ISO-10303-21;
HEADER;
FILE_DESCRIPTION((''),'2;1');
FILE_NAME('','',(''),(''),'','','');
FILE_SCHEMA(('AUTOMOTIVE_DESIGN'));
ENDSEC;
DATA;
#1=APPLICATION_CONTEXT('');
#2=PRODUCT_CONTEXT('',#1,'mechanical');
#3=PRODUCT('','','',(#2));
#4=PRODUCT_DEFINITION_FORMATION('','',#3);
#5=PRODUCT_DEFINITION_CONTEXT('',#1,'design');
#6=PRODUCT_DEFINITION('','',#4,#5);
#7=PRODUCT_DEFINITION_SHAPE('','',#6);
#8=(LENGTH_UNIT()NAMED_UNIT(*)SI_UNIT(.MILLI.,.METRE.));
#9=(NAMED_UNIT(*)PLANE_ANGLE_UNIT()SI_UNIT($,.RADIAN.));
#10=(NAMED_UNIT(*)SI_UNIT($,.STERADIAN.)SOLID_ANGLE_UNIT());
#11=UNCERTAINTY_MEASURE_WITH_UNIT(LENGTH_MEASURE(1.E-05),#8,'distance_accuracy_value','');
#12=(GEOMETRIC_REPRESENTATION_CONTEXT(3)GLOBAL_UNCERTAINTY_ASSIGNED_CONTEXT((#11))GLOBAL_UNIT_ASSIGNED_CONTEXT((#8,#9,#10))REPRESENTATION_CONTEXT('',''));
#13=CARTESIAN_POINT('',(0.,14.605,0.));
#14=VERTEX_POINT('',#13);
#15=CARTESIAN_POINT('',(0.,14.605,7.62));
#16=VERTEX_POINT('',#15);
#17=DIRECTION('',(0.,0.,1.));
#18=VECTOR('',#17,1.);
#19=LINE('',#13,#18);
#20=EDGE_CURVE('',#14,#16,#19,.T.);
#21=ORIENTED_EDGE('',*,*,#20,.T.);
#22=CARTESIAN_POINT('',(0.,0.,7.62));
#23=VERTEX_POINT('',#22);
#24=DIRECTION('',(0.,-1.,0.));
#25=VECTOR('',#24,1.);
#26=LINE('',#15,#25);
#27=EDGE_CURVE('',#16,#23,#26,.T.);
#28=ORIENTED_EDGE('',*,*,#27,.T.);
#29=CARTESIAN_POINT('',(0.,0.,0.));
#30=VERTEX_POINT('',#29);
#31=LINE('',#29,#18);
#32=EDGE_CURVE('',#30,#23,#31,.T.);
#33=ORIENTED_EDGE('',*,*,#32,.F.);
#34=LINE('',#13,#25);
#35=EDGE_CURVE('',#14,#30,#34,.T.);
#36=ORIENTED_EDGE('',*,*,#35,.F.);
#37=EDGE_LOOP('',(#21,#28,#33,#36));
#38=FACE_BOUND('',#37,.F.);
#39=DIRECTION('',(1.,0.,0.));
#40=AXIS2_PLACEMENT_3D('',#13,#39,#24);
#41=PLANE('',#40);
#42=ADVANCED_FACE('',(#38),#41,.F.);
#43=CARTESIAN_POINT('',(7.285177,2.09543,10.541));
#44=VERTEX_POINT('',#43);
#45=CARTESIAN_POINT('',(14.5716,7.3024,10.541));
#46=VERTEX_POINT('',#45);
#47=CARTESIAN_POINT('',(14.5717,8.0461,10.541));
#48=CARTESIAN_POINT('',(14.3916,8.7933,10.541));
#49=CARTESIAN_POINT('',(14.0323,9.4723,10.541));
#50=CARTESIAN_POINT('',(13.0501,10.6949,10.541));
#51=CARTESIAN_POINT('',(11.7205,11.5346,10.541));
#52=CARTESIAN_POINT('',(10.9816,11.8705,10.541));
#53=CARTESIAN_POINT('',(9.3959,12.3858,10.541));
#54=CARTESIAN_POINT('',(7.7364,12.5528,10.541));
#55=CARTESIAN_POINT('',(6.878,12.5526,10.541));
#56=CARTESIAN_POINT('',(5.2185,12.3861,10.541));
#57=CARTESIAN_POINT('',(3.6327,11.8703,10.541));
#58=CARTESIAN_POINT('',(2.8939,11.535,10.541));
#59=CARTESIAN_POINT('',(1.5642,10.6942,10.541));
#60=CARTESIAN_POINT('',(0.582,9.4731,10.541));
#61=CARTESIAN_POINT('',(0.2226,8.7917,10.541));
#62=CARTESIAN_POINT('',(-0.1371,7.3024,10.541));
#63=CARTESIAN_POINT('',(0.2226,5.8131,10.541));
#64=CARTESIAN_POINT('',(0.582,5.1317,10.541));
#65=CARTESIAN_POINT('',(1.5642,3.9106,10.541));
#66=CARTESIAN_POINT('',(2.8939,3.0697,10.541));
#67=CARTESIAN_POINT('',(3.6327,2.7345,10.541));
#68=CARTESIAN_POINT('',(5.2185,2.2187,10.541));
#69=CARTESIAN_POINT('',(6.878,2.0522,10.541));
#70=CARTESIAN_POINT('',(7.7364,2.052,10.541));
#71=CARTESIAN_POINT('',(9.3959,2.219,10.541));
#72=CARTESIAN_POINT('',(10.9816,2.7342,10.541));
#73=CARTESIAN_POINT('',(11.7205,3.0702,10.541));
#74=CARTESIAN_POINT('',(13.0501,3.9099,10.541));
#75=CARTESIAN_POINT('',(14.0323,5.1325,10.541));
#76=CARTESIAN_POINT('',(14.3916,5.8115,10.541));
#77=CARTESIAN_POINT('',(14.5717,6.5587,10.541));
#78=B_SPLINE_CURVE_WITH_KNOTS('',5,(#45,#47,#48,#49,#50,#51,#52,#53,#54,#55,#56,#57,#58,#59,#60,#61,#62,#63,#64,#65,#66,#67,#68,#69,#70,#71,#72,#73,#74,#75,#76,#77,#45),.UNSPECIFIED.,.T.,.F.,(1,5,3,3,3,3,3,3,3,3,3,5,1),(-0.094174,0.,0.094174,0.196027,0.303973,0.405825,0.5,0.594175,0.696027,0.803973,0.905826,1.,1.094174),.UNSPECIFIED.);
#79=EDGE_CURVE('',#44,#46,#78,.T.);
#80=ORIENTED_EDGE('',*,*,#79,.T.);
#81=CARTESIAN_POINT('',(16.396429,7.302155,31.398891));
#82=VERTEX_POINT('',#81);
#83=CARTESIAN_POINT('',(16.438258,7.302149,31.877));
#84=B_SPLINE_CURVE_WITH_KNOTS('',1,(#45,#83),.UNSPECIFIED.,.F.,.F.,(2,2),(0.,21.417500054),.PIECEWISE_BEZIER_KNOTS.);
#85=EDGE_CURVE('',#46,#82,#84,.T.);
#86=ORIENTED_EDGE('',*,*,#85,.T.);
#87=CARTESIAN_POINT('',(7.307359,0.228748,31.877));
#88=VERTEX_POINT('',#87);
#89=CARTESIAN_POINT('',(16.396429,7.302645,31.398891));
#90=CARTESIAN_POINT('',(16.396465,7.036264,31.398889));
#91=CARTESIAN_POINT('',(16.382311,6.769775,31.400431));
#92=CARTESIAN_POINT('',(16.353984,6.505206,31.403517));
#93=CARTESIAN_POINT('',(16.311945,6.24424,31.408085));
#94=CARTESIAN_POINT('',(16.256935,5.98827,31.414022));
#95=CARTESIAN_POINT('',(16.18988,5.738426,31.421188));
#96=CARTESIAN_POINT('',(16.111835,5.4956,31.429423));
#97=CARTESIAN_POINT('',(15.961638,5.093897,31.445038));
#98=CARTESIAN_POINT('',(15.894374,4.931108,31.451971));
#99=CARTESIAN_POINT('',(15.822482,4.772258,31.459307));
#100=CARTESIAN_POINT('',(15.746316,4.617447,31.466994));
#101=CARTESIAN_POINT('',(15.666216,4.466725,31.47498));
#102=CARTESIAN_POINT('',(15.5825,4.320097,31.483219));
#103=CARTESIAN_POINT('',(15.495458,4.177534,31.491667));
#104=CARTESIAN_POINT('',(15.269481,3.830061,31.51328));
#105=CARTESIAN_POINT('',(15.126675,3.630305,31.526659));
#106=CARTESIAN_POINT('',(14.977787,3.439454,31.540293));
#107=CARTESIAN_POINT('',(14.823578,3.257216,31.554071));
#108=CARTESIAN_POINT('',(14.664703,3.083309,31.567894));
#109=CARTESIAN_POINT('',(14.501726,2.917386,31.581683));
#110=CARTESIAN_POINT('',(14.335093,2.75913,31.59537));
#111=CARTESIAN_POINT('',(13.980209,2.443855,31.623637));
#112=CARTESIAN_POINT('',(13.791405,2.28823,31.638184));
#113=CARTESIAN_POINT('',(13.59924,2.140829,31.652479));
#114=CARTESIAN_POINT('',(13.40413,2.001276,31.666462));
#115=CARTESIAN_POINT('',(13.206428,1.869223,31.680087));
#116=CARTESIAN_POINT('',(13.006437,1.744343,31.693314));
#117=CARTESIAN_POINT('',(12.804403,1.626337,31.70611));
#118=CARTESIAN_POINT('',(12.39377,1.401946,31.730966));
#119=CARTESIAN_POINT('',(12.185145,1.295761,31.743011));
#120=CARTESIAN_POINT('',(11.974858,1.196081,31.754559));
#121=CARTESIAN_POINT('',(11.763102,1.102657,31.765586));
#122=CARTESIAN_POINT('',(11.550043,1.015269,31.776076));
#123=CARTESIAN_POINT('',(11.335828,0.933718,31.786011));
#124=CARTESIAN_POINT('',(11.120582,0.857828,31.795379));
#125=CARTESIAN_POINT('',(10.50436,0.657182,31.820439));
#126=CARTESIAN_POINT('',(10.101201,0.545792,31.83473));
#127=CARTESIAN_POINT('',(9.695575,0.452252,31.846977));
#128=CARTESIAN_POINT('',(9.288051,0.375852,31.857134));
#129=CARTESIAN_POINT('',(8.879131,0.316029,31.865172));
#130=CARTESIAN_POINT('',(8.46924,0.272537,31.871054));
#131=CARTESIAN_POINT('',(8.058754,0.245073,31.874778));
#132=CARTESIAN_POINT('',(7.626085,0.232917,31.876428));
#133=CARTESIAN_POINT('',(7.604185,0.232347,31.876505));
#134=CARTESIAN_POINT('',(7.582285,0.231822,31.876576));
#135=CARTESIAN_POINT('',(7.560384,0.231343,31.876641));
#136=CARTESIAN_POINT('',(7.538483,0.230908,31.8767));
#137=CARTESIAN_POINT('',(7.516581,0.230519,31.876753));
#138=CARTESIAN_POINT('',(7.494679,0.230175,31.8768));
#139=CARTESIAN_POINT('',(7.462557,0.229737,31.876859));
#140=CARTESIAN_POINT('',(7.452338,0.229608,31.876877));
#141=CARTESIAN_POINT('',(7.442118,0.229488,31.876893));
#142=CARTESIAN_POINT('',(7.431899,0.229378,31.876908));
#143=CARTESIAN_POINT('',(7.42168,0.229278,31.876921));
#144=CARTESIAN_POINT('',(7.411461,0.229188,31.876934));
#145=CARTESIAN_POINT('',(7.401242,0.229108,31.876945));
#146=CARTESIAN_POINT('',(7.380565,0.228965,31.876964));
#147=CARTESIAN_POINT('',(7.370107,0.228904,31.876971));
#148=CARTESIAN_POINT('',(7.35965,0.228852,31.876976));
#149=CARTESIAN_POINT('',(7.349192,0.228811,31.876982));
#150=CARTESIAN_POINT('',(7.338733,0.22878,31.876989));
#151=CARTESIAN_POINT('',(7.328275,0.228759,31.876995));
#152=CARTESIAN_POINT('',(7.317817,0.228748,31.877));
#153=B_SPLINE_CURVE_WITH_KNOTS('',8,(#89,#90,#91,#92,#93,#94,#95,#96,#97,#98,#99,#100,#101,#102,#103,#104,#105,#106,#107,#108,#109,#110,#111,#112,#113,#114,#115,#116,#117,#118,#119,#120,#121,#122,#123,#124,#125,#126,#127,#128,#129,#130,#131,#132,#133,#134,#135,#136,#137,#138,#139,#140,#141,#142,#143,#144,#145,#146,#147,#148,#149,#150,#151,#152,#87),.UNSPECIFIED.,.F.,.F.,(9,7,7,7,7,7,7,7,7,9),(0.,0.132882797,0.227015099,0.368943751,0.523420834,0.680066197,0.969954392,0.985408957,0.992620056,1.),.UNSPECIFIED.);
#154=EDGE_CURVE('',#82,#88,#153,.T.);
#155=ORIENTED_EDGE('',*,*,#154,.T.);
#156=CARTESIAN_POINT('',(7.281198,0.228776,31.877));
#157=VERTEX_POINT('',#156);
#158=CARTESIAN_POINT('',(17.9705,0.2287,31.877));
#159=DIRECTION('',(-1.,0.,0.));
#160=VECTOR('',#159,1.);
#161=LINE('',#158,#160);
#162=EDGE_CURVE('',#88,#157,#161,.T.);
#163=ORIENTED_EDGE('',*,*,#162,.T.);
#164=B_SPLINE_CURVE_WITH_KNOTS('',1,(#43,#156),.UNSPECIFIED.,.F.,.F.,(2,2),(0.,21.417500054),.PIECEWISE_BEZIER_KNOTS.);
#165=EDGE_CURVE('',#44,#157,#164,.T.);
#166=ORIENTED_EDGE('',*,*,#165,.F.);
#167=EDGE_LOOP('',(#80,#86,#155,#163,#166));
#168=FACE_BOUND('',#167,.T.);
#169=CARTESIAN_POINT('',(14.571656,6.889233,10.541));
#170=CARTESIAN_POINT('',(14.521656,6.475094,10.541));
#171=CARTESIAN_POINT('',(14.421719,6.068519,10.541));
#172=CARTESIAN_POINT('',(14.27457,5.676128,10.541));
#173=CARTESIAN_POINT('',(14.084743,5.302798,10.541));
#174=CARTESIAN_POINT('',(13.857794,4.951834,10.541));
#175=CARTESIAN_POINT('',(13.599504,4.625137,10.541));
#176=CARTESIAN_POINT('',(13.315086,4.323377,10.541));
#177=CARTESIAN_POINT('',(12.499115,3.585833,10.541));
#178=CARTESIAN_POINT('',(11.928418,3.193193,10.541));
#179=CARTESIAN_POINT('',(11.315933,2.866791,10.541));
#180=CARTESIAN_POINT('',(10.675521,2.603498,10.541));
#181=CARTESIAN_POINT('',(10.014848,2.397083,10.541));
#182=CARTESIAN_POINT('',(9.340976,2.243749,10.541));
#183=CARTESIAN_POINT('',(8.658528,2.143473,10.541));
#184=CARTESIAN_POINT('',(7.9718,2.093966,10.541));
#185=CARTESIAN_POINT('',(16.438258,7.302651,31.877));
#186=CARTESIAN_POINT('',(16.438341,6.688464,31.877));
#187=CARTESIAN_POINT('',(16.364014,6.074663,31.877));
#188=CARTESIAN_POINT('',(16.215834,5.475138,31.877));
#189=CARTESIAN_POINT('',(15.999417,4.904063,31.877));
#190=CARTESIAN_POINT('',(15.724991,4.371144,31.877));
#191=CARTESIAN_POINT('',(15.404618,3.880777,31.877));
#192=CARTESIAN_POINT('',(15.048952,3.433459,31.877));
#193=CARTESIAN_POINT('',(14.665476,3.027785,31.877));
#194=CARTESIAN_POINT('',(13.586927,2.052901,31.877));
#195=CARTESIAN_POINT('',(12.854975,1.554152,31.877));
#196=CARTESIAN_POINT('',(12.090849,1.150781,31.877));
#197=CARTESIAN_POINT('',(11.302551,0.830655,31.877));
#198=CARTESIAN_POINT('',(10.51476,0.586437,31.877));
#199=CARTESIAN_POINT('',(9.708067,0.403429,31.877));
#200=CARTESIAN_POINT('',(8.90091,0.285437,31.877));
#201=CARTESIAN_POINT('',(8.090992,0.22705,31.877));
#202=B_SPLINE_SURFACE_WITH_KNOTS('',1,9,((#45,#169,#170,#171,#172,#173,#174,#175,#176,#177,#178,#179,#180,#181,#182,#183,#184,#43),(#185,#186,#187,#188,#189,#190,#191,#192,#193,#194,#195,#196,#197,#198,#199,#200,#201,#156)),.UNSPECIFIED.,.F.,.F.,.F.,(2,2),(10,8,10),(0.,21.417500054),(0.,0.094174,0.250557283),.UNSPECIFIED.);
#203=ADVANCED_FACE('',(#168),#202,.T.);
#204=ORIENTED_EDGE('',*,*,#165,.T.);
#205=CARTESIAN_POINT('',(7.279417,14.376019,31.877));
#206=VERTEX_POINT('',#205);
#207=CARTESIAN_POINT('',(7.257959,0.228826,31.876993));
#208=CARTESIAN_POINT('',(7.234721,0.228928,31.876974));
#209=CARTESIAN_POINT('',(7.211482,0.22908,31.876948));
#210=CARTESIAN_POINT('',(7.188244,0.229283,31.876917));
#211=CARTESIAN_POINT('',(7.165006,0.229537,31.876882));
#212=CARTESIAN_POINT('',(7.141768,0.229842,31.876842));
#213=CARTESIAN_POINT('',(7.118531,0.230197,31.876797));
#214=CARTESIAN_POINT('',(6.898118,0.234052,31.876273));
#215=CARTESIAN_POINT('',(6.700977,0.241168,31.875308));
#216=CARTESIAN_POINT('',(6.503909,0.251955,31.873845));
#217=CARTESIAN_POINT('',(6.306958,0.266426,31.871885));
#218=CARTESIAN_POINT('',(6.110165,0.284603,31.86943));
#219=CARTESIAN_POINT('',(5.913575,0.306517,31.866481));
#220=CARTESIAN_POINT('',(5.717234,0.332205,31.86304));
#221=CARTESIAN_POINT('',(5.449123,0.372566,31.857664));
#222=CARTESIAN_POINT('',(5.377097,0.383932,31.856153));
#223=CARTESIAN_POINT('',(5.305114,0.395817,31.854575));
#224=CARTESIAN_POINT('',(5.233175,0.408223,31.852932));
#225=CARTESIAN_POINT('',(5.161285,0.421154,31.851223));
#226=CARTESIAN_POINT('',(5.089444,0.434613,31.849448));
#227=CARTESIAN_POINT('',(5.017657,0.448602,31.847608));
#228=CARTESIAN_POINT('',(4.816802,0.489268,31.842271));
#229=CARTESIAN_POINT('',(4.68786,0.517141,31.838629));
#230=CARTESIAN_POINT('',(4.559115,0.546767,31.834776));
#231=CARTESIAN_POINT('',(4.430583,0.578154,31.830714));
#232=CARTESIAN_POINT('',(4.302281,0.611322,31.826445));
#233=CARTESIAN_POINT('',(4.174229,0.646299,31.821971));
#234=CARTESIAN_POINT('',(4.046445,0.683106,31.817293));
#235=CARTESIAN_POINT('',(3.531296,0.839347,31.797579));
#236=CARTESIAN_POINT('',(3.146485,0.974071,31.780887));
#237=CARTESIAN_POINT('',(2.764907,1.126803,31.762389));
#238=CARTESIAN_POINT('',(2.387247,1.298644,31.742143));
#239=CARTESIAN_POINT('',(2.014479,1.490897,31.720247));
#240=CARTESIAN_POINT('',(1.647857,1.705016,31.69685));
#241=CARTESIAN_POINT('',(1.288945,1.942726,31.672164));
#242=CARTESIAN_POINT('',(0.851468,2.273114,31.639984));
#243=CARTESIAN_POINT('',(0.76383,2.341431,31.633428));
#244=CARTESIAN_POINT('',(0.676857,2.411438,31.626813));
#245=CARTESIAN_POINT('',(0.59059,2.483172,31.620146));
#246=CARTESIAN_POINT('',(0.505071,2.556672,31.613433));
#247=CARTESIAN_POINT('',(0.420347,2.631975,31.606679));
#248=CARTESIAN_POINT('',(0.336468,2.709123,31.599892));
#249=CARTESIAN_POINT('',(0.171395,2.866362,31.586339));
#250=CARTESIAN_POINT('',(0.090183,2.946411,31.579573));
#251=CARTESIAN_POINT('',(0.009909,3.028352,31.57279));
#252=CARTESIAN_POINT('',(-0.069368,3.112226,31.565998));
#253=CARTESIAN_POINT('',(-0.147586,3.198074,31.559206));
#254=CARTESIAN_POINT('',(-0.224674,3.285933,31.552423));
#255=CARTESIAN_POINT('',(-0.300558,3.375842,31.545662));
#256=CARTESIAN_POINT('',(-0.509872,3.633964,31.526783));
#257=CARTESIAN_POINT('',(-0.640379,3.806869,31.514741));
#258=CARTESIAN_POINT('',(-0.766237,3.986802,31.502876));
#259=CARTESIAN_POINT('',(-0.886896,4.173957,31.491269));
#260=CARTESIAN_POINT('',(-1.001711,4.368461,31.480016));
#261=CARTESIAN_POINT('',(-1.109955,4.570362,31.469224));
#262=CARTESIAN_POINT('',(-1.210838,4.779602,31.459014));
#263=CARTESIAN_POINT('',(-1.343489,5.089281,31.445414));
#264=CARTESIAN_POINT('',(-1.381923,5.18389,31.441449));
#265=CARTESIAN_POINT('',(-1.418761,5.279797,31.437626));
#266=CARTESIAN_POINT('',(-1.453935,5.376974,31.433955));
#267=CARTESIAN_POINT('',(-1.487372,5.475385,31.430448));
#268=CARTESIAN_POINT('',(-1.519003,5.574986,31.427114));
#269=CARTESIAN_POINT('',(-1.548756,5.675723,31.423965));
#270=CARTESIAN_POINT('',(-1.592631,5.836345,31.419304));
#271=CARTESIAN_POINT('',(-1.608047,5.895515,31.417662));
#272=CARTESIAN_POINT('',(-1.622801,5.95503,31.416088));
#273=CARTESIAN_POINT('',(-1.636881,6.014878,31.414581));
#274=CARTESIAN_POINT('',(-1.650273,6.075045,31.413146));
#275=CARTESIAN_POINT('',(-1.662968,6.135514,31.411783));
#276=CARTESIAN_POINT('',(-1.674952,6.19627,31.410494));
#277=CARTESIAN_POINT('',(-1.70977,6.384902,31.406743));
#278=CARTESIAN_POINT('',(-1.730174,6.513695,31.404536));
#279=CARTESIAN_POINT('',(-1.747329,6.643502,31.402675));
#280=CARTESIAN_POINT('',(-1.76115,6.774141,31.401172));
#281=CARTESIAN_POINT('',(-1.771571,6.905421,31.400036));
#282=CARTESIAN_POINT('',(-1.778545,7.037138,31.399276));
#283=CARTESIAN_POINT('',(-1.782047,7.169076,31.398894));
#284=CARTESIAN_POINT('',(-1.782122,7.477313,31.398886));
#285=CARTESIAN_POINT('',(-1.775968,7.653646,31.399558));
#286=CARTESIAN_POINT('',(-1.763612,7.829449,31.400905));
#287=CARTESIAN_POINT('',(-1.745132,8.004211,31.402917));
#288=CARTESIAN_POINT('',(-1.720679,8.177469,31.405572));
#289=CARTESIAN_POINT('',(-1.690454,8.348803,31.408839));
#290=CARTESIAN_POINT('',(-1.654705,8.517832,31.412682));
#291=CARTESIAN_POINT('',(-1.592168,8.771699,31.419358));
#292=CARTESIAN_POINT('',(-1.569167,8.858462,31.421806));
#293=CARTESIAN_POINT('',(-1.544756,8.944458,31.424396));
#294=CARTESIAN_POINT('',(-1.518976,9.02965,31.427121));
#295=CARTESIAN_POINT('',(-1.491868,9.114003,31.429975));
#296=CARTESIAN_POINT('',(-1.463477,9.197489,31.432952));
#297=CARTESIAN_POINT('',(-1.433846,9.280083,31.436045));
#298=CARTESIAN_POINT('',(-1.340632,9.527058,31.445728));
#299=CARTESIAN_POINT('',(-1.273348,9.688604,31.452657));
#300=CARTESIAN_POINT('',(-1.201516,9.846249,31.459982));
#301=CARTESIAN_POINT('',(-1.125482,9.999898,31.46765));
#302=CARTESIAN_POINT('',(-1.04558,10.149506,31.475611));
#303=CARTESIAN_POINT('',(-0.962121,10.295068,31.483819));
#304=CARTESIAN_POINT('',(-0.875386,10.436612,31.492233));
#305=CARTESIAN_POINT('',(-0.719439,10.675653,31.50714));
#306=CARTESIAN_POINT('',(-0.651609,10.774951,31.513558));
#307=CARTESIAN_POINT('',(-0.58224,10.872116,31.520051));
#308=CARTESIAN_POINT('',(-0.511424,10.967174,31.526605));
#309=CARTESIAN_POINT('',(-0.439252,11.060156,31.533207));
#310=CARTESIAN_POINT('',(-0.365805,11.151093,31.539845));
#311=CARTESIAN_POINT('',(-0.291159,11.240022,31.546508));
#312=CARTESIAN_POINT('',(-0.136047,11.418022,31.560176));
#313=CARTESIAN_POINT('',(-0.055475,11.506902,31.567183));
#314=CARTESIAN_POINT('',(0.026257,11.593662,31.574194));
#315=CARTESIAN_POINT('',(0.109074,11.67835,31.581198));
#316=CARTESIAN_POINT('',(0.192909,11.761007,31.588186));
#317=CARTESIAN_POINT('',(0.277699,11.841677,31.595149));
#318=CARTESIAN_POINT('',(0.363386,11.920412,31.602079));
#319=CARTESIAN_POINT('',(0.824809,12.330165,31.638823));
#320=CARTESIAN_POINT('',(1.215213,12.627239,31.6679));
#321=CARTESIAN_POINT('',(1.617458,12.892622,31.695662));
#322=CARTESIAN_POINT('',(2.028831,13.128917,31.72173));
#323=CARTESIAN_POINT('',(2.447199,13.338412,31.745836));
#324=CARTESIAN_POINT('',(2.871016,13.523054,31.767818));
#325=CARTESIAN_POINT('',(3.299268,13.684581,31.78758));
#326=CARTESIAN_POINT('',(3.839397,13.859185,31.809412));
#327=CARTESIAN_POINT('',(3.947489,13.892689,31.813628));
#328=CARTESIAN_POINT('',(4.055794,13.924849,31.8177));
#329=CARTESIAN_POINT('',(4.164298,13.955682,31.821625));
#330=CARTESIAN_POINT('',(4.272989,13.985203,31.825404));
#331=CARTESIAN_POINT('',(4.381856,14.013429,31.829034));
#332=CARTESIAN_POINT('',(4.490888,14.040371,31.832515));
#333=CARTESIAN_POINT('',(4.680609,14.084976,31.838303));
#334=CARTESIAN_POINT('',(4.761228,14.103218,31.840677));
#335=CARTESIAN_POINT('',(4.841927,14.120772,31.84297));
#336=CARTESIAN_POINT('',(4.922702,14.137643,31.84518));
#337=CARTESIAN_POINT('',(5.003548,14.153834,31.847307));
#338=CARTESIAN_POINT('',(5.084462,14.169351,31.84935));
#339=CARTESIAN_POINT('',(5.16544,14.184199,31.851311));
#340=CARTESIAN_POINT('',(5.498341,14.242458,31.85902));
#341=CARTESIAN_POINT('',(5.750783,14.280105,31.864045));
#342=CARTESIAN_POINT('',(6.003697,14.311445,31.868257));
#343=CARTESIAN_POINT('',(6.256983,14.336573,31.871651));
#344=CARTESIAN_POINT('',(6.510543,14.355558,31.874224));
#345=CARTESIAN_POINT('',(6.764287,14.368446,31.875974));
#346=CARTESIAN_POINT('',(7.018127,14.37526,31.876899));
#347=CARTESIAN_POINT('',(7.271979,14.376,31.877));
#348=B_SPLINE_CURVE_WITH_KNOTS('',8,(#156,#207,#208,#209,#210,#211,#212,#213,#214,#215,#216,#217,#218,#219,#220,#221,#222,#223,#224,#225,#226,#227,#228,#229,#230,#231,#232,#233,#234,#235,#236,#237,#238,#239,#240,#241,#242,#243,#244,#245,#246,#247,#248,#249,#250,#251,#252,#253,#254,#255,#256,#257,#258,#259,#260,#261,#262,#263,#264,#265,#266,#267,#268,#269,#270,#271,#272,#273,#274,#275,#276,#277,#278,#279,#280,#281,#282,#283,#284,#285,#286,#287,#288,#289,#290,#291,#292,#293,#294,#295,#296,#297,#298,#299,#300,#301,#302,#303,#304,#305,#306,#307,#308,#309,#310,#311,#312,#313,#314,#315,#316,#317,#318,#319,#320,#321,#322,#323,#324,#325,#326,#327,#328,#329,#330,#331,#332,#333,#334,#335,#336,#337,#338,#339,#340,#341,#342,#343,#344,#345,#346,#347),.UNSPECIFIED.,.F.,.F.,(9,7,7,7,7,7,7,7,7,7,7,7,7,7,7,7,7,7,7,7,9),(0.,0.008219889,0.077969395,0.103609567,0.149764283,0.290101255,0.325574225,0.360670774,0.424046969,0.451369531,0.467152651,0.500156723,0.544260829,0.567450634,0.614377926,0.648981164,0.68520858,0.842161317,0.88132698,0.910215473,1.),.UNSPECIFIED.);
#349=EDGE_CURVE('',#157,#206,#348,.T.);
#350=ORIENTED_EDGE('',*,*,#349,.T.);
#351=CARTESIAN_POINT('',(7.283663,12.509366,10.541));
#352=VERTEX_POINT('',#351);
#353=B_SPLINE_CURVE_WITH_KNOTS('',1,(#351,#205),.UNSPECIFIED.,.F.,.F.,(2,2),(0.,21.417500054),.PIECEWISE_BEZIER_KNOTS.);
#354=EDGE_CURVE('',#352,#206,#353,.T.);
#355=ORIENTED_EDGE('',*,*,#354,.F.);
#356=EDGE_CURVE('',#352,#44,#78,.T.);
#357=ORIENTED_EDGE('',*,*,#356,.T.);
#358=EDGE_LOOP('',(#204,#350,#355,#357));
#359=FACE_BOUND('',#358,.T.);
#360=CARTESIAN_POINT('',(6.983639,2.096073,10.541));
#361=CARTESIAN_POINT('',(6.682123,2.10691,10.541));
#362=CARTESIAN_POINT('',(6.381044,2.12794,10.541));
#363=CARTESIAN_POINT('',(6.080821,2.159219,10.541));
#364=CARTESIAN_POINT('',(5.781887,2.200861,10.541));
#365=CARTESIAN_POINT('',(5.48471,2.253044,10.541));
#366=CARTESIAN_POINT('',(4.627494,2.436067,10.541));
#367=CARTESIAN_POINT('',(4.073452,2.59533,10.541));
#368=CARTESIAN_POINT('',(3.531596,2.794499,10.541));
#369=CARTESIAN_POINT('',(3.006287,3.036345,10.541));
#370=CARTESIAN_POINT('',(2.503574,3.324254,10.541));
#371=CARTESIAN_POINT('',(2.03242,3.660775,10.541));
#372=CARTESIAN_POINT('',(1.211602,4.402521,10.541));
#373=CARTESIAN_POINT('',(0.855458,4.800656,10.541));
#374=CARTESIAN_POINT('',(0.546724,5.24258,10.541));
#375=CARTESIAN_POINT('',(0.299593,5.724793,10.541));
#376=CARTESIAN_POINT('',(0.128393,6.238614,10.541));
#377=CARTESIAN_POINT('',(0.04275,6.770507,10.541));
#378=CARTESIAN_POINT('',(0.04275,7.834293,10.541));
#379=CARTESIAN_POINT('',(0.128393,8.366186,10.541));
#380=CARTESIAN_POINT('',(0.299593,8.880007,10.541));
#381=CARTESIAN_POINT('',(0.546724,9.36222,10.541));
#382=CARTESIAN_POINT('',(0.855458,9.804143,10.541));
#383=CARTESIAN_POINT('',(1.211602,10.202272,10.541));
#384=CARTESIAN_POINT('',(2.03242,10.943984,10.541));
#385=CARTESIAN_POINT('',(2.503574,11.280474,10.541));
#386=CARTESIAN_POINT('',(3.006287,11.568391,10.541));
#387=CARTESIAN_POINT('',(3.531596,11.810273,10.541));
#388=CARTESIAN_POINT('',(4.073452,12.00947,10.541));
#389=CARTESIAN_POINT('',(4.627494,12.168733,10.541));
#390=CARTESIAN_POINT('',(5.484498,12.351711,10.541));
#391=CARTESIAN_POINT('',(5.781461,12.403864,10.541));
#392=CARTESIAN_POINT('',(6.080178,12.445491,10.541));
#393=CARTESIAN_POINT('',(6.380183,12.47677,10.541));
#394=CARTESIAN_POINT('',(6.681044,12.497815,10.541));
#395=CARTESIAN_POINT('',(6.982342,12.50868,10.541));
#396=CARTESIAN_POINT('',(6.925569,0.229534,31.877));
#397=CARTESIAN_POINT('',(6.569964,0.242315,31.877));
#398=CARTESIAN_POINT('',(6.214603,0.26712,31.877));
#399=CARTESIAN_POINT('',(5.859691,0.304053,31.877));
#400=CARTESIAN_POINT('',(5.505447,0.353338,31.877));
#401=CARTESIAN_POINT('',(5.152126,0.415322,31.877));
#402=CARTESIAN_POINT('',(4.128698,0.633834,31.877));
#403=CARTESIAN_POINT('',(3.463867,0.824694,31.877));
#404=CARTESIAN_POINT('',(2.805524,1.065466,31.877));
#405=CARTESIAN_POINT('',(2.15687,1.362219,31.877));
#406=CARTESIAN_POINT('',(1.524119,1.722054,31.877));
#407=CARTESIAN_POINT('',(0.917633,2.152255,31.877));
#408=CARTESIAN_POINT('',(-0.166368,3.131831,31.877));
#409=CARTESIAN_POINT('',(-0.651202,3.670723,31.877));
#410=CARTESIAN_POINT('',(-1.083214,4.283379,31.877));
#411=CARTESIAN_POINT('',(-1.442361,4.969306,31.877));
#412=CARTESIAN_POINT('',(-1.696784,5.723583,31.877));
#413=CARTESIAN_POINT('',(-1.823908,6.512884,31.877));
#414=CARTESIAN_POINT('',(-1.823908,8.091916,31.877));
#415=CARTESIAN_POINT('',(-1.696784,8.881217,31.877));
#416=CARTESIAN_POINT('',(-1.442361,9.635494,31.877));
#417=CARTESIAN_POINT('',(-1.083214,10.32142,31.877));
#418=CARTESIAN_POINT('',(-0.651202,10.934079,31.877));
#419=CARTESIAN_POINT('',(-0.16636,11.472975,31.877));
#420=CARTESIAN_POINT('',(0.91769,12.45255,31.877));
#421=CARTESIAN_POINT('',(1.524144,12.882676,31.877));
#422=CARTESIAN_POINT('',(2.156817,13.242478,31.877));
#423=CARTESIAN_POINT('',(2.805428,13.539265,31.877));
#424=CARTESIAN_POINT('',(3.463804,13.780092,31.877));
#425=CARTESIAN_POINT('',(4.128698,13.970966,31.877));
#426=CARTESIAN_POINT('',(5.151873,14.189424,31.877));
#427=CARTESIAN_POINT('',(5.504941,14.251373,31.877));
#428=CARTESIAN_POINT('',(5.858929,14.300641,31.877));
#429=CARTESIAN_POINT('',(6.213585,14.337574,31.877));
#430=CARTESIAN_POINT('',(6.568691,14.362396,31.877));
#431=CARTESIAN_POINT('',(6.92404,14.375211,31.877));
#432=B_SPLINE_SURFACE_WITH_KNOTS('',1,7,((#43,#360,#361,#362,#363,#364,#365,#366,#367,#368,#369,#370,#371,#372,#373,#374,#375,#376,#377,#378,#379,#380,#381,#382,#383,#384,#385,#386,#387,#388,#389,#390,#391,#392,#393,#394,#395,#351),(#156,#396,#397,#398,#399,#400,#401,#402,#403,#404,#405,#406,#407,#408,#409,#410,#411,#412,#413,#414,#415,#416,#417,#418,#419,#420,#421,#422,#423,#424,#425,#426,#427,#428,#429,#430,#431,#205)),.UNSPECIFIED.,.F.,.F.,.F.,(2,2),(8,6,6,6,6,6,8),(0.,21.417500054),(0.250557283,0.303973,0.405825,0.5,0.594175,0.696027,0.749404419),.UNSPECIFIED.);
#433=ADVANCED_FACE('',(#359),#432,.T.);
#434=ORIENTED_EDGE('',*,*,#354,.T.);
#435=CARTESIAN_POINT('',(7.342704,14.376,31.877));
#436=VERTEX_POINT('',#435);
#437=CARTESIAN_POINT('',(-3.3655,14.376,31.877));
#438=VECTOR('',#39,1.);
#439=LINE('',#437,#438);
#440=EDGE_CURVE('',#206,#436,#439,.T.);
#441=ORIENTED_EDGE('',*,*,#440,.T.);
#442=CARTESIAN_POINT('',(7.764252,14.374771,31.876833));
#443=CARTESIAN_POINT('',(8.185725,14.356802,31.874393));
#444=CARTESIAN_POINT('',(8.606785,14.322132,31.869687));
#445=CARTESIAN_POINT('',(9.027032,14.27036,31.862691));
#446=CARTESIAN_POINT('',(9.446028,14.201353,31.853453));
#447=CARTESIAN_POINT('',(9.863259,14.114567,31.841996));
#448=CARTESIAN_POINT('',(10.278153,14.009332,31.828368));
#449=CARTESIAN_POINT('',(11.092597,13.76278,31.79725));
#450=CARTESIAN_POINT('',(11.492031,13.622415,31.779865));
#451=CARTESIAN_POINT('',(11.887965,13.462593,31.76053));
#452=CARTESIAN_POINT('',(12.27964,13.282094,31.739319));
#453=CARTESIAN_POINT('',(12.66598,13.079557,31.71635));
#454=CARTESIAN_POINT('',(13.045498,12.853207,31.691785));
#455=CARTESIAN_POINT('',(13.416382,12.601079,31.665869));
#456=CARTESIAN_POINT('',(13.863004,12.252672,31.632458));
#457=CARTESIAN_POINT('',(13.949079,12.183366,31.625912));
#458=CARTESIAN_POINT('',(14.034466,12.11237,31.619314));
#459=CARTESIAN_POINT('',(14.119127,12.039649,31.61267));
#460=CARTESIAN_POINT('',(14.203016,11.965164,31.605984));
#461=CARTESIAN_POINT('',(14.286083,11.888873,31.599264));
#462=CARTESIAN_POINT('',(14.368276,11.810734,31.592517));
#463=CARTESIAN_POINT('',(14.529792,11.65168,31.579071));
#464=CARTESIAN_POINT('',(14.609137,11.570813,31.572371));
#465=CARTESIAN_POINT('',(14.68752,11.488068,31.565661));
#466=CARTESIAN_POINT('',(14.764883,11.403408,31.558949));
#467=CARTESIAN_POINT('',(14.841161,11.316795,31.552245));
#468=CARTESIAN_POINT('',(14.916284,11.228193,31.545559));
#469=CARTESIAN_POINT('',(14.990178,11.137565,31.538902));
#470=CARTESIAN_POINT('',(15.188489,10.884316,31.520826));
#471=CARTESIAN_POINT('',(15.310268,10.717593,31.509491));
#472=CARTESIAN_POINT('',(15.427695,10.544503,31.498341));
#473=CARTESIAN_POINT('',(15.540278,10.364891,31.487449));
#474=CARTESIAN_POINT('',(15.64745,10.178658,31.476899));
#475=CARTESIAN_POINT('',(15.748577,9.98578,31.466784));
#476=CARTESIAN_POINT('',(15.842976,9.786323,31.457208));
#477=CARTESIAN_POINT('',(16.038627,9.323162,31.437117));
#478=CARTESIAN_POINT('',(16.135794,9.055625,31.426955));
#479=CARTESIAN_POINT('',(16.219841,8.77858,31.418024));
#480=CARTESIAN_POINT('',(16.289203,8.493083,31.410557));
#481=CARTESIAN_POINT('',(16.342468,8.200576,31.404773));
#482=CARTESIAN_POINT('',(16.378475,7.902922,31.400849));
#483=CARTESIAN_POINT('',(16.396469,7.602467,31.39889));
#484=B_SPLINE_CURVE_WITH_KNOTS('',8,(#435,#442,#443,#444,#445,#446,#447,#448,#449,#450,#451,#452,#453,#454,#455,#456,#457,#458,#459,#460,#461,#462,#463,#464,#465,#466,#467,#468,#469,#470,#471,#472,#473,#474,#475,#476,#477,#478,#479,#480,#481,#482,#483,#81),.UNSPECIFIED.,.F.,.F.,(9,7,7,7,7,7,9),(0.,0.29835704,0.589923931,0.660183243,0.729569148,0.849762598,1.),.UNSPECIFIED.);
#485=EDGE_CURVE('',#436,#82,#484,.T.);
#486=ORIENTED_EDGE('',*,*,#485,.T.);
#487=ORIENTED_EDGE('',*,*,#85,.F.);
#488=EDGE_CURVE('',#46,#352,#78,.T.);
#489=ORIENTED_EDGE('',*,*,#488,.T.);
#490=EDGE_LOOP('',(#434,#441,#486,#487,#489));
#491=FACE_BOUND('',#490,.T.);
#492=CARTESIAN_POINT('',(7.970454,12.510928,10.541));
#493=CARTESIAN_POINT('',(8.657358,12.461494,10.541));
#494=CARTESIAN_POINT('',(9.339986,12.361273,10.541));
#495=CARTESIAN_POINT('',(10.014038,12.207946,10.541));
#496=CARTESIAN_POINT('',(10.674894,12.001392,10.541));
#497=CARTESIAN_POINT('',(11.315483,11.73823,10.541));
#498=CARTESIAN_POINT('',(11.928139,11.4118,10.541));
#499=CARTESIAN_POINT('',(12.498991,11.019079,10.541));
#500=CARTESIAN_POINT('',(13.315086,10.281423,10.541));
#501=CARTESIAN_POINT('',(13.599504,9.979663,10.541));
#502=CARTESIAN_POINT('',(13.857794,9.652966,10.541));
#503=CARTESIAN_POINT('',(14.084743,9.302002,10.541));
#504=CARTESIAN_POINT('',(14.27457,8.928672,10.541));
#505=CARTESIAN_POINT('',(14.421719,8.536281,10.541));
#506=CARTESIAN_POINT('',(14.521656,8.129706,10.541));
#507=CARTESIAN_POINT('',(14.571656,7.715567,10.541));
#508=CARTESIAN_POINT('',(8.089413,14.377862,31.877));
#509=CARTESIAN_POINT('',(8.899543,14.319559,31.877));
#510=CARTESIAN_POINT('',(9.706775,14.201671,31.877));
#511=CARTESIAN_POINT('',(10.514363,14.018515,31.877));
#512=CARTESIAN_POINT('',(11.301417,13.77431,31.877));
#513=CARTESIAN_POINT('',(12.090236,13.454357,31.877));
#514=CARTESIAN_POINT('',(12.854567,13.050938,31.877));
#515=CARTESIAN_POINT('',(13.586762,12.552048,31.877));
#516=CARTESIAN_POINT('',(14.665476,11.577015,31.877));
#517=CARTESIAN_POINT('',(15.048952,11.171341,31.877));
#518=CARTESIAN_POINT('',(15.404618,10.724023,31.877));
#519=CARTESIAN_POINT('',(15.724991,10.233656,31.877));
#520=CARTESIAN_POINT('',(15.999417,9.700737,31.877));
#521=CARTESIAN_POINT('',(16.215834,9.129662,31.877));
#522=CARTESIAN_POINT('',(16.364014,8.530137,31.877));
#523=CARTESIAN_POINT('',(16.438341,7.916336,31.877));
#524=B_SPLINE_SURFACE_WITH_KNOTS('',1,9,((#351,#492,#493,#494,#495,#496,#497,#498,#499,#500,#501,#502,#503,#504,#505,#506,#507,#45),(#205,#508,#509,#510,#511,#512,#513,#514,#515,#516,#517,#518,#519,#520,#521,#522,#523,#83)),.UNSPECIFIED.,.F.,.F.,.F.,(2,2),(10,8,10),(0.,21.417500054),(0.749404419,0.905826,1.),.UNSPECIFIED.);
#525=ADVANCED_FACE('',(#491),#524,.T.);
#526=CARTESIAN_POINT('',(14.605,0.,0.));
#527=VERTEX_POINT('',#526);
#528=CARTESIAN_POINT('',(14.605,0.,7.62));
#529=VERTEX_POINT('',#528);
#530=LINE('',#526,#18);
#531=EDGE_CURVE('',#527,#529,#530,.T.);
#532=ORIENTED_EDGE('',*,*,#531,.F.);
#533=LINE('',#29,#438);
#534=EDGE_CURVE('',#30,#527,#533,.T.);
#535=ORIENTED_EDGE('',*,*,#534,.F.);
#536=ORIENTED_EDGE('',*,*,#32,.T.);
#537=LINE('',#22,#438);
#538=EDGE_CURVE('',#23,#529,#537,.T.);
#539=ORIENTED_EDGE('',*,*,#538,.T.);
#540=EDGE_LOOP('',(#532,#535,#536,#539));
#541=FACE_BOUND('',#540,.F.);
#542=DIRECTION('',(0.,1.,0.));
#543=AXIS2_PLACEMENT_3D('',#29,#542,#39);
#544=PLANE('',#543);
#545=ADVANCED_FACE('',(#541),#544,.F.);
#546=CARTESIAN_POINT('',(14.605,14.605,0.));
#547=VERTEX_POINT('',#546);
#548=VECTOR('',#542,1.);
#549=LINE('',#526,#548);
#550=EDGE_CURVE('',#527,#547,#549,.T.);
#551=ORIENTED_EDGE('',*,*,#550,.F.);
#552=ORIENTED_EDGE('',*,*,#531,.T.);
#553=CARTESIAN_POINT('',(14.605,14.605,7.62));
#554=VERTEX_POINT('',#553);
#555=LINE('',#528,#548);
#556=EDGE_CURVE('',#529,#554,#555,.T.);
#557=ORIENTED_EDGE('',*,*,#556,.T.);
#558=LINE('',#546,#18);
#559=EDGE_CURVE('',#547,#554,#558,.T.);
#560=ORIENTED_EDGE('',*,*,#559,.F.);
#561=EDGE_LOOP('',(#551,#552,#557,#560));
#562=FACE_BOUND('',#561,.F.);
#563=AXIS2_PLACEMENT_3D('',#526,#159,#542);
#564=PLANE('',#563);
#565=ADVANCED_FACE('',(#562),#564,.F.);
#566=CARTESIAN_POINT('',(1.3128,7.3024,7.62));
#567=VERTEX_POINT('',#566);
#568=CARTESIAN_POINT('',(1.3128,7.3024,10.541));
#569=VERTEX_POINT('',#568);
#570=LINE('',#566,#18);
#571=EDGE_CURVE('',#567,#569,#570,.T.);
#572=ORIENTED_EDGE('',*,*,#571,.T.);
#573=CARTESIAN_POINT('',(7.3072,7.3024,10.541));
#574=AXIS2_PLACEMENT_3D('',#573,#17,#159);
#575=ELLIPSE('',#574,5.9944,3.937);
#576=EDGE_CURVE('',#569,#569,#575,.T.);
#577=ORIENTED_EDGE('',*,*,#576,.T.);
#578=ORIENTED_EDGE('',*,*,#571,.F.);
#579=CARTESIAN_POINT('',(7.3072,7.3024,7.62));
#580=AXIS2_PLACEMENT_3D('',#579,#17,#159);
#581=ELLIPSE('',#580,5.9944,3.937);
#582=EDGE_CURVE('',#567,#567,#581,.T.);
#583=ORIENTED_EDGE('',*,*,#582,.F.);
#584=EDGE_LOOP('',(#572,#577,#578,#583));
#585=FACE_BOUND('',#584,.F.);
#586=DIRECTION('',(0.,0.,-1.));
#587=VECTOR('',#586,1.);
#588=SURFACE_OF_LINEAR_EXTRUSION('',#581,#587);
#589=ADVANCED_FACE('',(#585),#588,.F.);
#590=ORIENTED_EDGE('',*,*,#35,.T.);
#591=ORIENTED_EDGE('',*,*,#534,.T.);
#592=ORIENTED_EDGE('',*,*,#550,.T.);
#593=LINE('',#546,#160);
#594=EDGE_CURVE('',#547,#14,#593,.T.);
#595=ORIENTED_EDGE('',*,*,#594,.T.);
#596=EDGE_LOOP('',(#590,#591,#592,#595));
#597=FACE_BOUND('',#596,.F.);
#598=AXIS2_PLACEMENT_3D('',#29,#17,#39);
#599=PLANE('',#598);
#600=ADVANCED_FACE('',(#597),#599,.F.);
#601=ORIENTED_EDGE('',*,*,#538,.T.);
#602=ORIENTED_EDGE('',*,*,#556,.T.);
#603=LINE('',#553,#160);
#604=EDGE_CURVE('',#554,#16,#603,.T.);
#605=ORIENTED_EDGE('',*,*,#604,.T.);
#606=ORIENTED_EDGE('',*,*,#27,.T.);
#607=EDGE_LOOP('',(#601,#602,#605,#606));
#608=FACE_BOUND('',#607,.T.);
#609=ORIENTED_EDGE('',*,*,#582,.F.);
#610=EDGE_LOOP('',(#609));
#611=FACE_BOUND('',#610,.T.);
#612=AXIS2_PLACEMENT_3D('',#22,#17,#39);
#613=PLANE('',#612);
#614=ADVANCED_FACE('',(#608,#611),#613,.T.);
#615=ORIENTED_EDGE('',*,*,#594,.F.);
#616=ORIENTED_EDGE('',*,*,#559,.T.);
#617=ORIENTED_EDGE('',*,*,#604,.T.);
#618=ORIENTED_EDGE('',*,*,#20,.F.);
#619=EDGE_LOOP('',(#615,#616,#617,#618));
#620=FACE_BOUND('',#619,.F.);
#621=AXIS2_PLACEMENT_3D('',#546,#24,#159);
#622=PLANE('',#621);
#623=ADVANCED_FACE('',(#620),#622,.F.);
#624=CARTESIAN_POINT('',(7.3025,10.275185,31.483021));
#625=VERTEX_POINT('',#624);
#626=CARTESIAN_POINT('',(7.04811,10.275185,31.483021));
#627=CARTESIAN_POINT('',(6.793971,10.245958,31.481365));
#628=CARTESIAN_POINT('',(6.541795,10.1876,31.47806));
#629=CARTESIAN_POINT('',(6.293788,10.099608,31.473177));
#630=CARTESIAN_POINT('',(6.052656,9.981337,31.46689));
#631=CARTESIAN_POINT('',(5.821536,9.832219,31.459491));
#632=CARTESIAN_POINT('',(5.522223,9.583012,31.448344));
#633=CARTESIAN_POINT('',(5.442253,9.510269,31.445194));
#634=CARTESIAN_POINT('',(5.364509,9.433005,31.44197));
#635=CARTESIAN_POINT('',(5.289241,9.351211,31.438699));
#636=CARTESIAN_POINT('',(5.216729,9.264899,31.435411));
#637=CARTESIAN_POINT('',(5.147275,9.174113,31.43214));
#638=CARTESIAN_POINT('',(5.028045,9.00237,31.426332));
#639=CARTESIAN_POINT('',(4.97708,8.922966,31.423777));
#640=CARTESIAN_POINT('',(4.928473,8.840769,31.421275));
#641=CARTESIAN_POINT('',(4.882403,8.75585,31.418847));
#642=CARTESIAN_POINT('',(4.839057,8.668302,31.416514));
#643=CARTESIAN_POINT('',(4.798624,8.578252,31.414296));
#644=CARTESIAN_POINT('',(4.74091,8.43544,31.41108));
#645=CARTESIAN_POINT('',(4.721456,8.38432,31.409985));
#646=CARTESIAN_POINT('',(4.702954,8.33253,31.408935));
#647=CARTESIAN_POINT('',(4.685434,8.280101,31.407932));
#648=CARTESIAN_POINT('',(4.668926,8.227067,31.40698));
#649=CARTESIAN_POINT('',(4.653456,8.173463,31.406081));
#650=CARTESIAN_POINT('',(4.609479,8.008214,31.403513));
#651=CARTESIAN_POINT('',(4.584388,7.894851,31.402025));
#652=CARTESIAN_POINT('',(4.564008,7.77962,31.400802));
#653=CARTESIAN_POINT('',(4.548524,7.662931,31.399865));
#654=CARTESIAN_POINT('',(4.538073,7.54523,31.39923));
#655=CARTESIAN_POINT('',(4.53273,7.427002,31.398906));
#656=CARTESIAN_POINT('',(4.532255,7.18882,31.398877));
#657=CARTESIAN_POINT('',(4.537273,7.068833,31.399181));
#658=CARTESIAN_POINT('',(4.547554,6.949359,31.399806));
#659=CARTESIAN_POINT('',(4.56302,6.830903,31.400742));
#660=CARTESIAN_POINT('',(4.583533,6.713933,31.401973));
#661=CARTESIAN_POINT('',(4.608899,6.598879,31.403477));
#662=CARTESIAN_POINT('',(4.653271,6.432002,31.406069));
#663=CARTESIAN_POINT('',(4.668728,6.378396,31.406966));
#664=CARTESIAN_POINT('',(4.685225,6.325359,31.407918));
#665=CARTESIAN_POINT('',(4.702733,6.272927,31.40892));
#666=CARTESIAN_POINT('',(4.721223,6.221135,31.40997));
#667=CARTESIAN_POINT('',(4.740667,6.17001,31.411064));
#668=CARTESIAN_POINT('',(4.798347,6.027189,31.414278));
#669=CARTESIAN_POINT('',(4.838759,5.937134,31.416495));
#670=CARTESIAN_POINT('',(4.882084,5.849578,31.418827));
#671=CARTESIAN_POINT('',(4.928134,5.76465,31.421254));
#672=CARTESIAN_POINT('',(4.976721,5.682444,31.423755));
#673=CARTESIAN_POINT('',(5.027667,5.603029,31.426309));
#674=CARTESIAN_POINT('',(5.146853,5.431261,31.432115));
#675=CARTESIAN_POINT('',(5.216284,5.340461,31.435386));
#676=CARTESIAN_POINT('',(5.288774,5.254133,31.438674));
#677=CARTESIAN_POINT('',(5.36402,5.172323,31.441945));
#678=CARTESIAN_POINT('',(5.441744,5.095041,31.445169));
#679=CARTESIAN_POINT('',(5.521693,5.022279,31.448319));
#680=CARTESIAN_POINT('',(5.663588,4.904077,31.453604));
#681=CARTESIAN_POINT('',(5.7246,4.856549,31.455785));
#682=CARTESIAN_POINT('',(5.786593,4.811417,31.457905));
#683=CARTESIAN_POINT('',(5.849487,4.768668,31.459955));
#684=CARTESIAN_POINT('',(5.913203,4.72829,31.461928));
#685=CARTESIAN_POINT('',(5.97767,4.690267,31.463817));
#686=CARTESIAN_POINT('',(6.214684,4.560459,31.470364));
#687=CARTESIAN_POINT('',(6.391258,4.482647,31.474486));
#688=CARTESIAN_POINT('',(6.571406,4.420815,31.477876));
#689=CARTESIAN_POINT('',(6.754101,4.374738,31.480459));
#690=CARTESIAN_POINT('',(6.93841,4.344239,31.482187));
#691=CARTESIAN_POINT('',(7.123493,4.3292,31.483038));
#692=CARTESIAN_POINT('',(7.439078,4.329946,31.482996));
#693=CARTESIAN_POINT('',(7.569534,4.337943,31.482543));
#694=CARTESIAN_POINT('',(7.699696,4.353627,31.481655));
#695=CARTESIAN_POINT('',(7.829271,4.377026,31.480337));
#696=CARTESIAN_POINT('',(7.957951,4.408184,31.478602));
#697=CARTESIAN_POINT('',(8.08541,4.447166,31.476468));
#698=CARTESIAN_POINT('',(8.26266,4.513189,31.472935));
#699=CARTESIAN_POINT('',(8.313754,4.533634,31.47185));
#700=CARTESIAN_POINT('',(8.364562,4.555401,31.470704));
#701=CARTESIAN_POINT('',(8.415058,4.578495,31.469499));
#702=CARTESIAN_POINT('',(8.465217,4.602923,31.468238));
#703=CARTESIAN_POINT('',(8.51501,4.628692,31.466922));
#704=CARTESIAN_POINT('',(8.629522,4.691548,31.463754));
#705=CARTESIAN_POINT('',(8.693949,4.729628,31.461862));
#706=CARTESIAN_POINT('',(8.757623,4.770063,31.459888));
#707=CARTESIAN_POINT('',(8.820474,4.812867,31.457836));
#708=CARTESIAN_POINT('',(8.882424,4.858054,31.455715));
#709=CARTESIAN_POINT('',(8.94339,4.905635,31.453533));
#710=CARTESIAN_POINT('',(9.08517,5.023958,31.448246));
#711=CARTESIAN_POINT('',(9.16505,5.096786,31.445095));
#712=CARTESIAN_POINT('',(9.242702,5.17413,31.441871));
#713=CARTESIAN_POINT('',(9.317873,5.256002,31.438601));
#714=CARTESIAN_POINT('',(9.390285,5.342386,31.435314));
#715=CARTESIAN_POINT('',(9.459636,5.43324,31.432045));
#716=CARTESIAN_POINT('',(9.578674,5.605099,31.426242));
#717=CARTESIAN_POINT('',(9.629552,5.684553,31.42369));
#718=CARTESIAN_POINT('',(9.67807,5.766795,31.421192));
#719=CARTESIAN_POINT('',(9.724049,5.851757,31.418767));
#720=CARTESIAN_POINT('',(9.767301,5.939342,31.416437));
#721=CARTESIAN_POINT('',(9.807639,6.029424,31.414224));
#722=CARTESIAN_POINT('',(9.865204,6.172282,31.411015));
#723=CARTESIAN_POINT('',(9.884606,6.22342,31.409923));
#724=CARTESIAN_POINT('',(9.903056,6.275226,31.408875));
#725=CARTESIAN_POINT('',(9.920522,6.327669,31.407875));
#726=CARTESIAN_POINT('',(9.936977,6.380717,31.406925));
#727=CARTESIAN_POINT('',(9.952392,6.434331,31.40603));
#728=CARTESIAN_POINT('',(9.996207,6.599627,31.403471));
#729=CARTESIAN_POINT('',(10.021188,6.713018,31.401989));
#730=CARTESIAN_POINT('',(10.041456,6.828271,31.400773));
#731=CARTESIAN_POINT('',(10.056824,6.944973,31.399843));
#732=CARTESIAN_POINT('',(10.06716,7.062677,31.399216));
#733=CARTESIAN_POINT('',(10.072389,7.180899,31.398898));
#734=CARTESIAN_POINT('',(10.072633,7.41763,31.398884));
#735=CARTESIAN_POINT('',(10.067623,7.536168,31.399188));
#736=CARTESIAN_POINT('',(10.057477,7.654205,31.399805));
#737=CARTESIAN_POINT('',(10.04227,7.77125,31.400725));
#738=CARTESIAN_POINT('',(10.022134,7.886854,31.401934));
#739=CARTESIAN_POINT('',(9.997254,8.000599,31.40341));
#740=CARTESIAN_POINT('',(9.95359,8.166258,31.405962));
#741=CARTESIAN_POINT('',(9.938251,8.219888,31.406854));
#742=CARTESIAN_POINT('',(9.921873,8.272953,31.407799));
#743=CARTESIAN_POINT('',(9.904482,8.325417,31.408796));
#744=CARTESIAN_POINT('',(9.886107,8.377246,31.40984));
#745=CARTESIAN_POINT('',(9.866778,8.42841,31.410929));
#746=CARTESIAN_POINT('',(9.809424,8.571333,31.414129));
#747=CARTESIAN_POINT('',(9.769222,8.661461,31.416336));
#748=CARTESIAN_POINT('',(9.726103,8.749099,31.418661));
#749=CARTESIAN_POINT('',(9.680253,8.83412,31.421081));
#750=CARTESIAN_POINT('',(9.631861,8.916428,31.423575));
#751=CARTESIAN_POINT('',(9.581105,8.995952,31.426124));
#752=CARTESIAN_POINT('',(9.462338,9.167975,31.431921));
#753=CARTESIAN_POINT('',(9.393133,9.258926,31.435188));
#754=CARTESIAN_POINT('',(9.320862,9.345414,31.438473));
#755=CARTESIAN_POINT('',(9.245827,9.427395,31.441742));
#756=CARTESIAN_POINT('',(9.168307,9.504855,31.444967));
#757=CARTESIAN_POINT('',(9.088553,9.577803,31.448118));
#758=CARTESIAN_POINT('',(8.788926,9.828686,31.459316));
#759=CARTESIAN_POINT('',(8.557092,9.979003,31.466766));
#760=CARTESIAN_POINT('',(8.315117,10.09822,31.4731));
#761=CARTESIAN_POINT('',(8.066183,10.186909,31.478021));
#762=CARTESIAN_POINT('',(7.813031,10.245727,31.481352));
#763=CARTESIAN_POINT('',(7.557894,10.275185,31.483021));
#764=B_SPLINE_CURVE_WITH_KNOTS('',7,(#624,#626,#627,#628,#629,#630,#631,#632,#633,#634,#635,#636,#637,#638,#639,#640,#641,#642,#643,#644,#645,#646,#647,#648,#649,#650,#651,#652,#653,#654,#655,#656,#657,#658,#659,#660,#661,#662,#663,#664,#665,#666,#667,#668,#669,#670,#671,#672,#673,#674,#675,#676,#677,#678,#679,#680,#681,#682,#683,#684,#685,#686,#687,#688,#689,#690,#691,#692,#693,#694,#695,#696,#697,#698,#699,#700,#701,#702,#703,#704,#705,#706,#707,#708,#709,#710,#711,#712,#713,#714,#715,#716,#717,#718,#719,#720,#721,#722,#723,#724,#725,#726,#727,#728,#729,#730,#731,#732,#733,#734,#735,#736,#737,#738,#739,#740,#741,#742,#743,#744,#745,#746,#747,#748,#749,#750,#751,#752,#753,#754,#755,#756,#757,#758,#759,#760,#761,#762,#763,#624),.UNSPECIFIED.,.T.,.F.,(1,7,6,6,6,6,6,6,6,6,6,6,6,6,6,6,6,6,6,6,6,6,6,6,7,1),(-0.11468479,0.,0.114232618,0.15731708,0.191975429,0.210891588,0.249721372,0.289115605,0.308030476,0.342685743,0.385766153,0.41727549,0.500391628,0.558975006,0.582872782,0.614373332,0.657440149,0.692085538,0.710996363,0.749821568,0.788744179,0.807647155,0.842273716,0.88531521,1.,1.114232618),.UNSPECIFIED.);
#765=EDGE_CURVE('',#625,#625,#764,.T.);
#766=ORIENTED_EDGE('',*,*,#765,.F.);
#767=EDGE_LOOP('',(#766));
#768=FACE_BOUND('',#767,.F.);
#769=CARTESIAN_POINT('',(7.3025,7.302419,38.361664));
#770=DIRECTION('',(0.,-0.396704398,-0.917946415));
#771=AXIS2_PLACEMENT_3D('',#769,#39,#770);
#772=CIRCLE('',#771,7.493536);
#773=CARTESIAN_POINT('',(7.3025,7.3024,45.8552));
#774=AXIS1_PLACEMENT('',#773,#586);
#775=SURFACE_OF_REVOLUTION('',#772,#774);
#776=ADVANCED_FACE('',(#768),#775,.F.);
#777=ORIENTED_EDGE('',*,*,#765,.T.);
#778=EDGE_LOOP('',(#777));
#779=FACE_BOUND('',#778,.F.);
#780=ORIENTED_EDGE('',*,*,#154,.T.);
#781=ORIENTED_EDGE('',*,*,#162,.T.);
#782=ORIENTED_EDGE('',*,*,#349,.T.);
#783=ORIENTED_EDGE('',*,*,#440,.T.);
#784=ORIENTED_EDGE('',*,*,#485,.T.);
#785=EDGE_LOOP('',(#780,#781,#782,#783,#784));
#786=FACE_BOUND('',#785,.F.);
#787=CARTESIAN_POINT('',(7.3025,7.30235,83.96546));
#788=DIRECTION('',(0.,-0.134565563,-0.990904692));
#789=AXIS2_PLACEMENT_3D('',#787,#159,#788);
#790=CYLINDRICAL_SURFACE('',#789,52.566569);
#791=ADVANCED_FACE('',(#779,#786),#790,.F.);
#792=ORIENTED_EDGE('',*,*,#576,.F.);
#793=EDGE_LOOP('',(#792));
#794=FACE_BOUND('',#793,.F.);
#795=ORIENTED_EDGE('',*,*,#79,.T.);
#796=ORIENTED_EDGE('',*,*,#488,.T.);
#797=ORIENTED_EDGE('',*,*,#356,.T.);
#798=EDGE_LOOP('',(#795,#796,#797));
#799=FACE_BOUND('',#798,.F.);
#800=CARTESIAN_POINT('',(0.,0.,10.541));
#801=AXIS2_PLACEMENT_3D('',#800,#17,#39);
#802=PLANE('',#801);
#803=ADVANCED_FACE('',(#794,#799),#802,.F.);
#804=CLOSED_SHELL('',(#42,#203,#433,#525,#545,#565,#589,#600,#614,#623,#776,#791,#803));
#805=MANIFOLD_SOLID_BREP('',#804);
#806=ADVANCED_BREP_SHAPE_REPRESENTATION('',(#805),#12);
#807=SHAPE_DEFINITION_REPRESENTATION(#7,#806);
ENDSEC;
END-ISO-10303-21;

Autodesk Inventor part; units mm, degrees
ref_plane "YZ Plane" through (0, 0, 0) normal (1, 0, 0) x (0, 1, 0)
ref_plane "XZ Plane" through (0, 0, 0) normal (0, 1, 0) x (-1, 0, 0)
ref_plane "XY Plane" through (0, 0, 0) normal (0, 0, 1) x (1, 0, 0)
sketch "Sketch1" plane through (0, 0, 0) normal (0, 0, 1) x (1, 0, 0)
  line L0 (0, 0) -> (14.605, 0)
  line L1 (14.605, 0) -> (14.605, 14.605)
  line L2 (14.605, 14.605) -> (0, 14.605)
  line L3 (0, 14.605) -> (0, 0)
  dimension "d0" = 14.605
  dimension "d1" = 14.605
extrude "Extrusion1" add sketch "Sketch1" along normal blind 7.62
sketch "Sketch2" plane through (0, 0, 7.62) normal (0, 0, 1) x (1, 0, 0)
  line L0 (0, 14.605) -> (0, 0) construction
  ellipse E0 centre (7.3072, 7.3024) end of major axis (1.3128, 7.3024) minor radius 3.937
  line L1 (0, 7.3025) -> (14.605, 7.3025) construction
  line L2 (14.605, 0) -> (14.605, 14.605) construction
  line L3 (14.605, 14.605) -> (0, 14.605) construction
  line L4 (7.3025, 14.605) -> (7.3025, 0) construction
  dimension "d4" = 5.9944
  dimension "d5" = 3.937
extrude "Extrusion2" add sketch "Sketch2" along normal blind 2.921
sketch "Sketch3" plane through (0, 0, 10.541) normal (0, 0, 1) x (1, 0, 0)
  ellipse E0 centre (7.3072, 7.3024) end of major axis (13.3016, 7.3024) minor radius 3.937 projected
  spline S0 degree 5 poles (14.5716, 7.3024) (14.5717, 8.0461) (14.3916, 8.7933) (14.0323, 9.4723) (13.0501, 10.6949) (11.7205, 11.5346) (10.9816, 11.8705) (9.3959, 12.3858) (7.7364, 12.5528) (6.878, 12.5526) (5.2185, 12.3861) (3.6327, 11.8703) (2.8939, 11.535) (1.5642, 10.6942) (0.582, 9.4731) (0.2226, 8.7917) (-0.1371, 7.3024) (0.2226, 5.8131) (0.582, 5.1317) (1.5642, 3.9106) (2.8939, 3.0697) (3.6327, 2.7345) (5.2185, 2.2187) (6.878, 2.0522) (7.7364, 2.052) (9.3959, 2.219) (10.9816, 2.7342) (11.7205, 3.0702) (13.0501, 3.9099) (14.0323, 5.1325) (14.3916, 5.8115) (14.5717, 6.5587) (14.5716, 7.3024) knots 0 0 0 0 0 0 0.094174 0.094174 0.094174 0.196027 0.196027 0.196027 0.303973 0.303973 0.303973 0.405825 0.405825 0.405825 0.5 0.5 0.5 0.594175 0.594175 0.594175 0.696027 0.696027 0.696027 0.803973 0.803973 0.803973 0.905826 0.905826 0.905826 1 1 1 1 1 1
  point P0 (0, 0)
  dimension "d8" = 1.27
extrude "Extrusion3" add sketch "Sketch3" along normal blind 21.336 draft 5 contours E0 | S0
ref_plane "Work Plane1" through (7.3025, 0, 0) normal (1, 0, 0) x (0, 0, -1)
sketch "Sketch4" plane through (7.3025, 0, 0) normal (1, 0, 0) x (0, 0, -1)
  line L0 (-31.877, 14.376) -> (-31.877, 0.2287) projected
  line L1 (-10.541, 7.3024) -> (-31.877, 7.3024) projected
  line L2 (-10.541, 12.5094) -> (-10.541, 2.0954) projected
  line L3 (-31.877, 14.376) -> (-31.877, 0.2287) projected
  line L4 (-10.541, 7.3024) -> (-31.877, 7.3024) projected
  line L5 (-10.541, 12.5094) -> (-10.541, 2.0954) projected
  arc A0 (-31.877, 0.2287) -> (-31.877, 14.376) centre (-83.9662, 7.3024) ccw
  point P0 (0, 0)
extrude "Extrusion4" cut sketch "Sketch4" along normal mid plane 21.336
sketch "Sketch6" plane through (7.3025, 0, 0) normal (1, 0, 0) x (0, 0, -1)
  line L0 (-10.541, 7.3024) -> (-31.3989, 7.3024) projected
  line L1 (-10.541, 12.5094) -> (-10.541, 2.0954) projected
  arc A0 (-31.483, 4.3297) -> (-45.8552, 7.3024) centre (-38.3617, 7.3024) ccw
  line L2 (-45.8552, 7.3024) -> (-30.8682, 7.3024)
  point P0 (0, 0)
revolve "Revolution2" add sketch "Sketch6" angle 360 about axis through (7.3025, 7.3024, 45.8552) along (0, 0, -1)
properties part number "Head Em 2"
